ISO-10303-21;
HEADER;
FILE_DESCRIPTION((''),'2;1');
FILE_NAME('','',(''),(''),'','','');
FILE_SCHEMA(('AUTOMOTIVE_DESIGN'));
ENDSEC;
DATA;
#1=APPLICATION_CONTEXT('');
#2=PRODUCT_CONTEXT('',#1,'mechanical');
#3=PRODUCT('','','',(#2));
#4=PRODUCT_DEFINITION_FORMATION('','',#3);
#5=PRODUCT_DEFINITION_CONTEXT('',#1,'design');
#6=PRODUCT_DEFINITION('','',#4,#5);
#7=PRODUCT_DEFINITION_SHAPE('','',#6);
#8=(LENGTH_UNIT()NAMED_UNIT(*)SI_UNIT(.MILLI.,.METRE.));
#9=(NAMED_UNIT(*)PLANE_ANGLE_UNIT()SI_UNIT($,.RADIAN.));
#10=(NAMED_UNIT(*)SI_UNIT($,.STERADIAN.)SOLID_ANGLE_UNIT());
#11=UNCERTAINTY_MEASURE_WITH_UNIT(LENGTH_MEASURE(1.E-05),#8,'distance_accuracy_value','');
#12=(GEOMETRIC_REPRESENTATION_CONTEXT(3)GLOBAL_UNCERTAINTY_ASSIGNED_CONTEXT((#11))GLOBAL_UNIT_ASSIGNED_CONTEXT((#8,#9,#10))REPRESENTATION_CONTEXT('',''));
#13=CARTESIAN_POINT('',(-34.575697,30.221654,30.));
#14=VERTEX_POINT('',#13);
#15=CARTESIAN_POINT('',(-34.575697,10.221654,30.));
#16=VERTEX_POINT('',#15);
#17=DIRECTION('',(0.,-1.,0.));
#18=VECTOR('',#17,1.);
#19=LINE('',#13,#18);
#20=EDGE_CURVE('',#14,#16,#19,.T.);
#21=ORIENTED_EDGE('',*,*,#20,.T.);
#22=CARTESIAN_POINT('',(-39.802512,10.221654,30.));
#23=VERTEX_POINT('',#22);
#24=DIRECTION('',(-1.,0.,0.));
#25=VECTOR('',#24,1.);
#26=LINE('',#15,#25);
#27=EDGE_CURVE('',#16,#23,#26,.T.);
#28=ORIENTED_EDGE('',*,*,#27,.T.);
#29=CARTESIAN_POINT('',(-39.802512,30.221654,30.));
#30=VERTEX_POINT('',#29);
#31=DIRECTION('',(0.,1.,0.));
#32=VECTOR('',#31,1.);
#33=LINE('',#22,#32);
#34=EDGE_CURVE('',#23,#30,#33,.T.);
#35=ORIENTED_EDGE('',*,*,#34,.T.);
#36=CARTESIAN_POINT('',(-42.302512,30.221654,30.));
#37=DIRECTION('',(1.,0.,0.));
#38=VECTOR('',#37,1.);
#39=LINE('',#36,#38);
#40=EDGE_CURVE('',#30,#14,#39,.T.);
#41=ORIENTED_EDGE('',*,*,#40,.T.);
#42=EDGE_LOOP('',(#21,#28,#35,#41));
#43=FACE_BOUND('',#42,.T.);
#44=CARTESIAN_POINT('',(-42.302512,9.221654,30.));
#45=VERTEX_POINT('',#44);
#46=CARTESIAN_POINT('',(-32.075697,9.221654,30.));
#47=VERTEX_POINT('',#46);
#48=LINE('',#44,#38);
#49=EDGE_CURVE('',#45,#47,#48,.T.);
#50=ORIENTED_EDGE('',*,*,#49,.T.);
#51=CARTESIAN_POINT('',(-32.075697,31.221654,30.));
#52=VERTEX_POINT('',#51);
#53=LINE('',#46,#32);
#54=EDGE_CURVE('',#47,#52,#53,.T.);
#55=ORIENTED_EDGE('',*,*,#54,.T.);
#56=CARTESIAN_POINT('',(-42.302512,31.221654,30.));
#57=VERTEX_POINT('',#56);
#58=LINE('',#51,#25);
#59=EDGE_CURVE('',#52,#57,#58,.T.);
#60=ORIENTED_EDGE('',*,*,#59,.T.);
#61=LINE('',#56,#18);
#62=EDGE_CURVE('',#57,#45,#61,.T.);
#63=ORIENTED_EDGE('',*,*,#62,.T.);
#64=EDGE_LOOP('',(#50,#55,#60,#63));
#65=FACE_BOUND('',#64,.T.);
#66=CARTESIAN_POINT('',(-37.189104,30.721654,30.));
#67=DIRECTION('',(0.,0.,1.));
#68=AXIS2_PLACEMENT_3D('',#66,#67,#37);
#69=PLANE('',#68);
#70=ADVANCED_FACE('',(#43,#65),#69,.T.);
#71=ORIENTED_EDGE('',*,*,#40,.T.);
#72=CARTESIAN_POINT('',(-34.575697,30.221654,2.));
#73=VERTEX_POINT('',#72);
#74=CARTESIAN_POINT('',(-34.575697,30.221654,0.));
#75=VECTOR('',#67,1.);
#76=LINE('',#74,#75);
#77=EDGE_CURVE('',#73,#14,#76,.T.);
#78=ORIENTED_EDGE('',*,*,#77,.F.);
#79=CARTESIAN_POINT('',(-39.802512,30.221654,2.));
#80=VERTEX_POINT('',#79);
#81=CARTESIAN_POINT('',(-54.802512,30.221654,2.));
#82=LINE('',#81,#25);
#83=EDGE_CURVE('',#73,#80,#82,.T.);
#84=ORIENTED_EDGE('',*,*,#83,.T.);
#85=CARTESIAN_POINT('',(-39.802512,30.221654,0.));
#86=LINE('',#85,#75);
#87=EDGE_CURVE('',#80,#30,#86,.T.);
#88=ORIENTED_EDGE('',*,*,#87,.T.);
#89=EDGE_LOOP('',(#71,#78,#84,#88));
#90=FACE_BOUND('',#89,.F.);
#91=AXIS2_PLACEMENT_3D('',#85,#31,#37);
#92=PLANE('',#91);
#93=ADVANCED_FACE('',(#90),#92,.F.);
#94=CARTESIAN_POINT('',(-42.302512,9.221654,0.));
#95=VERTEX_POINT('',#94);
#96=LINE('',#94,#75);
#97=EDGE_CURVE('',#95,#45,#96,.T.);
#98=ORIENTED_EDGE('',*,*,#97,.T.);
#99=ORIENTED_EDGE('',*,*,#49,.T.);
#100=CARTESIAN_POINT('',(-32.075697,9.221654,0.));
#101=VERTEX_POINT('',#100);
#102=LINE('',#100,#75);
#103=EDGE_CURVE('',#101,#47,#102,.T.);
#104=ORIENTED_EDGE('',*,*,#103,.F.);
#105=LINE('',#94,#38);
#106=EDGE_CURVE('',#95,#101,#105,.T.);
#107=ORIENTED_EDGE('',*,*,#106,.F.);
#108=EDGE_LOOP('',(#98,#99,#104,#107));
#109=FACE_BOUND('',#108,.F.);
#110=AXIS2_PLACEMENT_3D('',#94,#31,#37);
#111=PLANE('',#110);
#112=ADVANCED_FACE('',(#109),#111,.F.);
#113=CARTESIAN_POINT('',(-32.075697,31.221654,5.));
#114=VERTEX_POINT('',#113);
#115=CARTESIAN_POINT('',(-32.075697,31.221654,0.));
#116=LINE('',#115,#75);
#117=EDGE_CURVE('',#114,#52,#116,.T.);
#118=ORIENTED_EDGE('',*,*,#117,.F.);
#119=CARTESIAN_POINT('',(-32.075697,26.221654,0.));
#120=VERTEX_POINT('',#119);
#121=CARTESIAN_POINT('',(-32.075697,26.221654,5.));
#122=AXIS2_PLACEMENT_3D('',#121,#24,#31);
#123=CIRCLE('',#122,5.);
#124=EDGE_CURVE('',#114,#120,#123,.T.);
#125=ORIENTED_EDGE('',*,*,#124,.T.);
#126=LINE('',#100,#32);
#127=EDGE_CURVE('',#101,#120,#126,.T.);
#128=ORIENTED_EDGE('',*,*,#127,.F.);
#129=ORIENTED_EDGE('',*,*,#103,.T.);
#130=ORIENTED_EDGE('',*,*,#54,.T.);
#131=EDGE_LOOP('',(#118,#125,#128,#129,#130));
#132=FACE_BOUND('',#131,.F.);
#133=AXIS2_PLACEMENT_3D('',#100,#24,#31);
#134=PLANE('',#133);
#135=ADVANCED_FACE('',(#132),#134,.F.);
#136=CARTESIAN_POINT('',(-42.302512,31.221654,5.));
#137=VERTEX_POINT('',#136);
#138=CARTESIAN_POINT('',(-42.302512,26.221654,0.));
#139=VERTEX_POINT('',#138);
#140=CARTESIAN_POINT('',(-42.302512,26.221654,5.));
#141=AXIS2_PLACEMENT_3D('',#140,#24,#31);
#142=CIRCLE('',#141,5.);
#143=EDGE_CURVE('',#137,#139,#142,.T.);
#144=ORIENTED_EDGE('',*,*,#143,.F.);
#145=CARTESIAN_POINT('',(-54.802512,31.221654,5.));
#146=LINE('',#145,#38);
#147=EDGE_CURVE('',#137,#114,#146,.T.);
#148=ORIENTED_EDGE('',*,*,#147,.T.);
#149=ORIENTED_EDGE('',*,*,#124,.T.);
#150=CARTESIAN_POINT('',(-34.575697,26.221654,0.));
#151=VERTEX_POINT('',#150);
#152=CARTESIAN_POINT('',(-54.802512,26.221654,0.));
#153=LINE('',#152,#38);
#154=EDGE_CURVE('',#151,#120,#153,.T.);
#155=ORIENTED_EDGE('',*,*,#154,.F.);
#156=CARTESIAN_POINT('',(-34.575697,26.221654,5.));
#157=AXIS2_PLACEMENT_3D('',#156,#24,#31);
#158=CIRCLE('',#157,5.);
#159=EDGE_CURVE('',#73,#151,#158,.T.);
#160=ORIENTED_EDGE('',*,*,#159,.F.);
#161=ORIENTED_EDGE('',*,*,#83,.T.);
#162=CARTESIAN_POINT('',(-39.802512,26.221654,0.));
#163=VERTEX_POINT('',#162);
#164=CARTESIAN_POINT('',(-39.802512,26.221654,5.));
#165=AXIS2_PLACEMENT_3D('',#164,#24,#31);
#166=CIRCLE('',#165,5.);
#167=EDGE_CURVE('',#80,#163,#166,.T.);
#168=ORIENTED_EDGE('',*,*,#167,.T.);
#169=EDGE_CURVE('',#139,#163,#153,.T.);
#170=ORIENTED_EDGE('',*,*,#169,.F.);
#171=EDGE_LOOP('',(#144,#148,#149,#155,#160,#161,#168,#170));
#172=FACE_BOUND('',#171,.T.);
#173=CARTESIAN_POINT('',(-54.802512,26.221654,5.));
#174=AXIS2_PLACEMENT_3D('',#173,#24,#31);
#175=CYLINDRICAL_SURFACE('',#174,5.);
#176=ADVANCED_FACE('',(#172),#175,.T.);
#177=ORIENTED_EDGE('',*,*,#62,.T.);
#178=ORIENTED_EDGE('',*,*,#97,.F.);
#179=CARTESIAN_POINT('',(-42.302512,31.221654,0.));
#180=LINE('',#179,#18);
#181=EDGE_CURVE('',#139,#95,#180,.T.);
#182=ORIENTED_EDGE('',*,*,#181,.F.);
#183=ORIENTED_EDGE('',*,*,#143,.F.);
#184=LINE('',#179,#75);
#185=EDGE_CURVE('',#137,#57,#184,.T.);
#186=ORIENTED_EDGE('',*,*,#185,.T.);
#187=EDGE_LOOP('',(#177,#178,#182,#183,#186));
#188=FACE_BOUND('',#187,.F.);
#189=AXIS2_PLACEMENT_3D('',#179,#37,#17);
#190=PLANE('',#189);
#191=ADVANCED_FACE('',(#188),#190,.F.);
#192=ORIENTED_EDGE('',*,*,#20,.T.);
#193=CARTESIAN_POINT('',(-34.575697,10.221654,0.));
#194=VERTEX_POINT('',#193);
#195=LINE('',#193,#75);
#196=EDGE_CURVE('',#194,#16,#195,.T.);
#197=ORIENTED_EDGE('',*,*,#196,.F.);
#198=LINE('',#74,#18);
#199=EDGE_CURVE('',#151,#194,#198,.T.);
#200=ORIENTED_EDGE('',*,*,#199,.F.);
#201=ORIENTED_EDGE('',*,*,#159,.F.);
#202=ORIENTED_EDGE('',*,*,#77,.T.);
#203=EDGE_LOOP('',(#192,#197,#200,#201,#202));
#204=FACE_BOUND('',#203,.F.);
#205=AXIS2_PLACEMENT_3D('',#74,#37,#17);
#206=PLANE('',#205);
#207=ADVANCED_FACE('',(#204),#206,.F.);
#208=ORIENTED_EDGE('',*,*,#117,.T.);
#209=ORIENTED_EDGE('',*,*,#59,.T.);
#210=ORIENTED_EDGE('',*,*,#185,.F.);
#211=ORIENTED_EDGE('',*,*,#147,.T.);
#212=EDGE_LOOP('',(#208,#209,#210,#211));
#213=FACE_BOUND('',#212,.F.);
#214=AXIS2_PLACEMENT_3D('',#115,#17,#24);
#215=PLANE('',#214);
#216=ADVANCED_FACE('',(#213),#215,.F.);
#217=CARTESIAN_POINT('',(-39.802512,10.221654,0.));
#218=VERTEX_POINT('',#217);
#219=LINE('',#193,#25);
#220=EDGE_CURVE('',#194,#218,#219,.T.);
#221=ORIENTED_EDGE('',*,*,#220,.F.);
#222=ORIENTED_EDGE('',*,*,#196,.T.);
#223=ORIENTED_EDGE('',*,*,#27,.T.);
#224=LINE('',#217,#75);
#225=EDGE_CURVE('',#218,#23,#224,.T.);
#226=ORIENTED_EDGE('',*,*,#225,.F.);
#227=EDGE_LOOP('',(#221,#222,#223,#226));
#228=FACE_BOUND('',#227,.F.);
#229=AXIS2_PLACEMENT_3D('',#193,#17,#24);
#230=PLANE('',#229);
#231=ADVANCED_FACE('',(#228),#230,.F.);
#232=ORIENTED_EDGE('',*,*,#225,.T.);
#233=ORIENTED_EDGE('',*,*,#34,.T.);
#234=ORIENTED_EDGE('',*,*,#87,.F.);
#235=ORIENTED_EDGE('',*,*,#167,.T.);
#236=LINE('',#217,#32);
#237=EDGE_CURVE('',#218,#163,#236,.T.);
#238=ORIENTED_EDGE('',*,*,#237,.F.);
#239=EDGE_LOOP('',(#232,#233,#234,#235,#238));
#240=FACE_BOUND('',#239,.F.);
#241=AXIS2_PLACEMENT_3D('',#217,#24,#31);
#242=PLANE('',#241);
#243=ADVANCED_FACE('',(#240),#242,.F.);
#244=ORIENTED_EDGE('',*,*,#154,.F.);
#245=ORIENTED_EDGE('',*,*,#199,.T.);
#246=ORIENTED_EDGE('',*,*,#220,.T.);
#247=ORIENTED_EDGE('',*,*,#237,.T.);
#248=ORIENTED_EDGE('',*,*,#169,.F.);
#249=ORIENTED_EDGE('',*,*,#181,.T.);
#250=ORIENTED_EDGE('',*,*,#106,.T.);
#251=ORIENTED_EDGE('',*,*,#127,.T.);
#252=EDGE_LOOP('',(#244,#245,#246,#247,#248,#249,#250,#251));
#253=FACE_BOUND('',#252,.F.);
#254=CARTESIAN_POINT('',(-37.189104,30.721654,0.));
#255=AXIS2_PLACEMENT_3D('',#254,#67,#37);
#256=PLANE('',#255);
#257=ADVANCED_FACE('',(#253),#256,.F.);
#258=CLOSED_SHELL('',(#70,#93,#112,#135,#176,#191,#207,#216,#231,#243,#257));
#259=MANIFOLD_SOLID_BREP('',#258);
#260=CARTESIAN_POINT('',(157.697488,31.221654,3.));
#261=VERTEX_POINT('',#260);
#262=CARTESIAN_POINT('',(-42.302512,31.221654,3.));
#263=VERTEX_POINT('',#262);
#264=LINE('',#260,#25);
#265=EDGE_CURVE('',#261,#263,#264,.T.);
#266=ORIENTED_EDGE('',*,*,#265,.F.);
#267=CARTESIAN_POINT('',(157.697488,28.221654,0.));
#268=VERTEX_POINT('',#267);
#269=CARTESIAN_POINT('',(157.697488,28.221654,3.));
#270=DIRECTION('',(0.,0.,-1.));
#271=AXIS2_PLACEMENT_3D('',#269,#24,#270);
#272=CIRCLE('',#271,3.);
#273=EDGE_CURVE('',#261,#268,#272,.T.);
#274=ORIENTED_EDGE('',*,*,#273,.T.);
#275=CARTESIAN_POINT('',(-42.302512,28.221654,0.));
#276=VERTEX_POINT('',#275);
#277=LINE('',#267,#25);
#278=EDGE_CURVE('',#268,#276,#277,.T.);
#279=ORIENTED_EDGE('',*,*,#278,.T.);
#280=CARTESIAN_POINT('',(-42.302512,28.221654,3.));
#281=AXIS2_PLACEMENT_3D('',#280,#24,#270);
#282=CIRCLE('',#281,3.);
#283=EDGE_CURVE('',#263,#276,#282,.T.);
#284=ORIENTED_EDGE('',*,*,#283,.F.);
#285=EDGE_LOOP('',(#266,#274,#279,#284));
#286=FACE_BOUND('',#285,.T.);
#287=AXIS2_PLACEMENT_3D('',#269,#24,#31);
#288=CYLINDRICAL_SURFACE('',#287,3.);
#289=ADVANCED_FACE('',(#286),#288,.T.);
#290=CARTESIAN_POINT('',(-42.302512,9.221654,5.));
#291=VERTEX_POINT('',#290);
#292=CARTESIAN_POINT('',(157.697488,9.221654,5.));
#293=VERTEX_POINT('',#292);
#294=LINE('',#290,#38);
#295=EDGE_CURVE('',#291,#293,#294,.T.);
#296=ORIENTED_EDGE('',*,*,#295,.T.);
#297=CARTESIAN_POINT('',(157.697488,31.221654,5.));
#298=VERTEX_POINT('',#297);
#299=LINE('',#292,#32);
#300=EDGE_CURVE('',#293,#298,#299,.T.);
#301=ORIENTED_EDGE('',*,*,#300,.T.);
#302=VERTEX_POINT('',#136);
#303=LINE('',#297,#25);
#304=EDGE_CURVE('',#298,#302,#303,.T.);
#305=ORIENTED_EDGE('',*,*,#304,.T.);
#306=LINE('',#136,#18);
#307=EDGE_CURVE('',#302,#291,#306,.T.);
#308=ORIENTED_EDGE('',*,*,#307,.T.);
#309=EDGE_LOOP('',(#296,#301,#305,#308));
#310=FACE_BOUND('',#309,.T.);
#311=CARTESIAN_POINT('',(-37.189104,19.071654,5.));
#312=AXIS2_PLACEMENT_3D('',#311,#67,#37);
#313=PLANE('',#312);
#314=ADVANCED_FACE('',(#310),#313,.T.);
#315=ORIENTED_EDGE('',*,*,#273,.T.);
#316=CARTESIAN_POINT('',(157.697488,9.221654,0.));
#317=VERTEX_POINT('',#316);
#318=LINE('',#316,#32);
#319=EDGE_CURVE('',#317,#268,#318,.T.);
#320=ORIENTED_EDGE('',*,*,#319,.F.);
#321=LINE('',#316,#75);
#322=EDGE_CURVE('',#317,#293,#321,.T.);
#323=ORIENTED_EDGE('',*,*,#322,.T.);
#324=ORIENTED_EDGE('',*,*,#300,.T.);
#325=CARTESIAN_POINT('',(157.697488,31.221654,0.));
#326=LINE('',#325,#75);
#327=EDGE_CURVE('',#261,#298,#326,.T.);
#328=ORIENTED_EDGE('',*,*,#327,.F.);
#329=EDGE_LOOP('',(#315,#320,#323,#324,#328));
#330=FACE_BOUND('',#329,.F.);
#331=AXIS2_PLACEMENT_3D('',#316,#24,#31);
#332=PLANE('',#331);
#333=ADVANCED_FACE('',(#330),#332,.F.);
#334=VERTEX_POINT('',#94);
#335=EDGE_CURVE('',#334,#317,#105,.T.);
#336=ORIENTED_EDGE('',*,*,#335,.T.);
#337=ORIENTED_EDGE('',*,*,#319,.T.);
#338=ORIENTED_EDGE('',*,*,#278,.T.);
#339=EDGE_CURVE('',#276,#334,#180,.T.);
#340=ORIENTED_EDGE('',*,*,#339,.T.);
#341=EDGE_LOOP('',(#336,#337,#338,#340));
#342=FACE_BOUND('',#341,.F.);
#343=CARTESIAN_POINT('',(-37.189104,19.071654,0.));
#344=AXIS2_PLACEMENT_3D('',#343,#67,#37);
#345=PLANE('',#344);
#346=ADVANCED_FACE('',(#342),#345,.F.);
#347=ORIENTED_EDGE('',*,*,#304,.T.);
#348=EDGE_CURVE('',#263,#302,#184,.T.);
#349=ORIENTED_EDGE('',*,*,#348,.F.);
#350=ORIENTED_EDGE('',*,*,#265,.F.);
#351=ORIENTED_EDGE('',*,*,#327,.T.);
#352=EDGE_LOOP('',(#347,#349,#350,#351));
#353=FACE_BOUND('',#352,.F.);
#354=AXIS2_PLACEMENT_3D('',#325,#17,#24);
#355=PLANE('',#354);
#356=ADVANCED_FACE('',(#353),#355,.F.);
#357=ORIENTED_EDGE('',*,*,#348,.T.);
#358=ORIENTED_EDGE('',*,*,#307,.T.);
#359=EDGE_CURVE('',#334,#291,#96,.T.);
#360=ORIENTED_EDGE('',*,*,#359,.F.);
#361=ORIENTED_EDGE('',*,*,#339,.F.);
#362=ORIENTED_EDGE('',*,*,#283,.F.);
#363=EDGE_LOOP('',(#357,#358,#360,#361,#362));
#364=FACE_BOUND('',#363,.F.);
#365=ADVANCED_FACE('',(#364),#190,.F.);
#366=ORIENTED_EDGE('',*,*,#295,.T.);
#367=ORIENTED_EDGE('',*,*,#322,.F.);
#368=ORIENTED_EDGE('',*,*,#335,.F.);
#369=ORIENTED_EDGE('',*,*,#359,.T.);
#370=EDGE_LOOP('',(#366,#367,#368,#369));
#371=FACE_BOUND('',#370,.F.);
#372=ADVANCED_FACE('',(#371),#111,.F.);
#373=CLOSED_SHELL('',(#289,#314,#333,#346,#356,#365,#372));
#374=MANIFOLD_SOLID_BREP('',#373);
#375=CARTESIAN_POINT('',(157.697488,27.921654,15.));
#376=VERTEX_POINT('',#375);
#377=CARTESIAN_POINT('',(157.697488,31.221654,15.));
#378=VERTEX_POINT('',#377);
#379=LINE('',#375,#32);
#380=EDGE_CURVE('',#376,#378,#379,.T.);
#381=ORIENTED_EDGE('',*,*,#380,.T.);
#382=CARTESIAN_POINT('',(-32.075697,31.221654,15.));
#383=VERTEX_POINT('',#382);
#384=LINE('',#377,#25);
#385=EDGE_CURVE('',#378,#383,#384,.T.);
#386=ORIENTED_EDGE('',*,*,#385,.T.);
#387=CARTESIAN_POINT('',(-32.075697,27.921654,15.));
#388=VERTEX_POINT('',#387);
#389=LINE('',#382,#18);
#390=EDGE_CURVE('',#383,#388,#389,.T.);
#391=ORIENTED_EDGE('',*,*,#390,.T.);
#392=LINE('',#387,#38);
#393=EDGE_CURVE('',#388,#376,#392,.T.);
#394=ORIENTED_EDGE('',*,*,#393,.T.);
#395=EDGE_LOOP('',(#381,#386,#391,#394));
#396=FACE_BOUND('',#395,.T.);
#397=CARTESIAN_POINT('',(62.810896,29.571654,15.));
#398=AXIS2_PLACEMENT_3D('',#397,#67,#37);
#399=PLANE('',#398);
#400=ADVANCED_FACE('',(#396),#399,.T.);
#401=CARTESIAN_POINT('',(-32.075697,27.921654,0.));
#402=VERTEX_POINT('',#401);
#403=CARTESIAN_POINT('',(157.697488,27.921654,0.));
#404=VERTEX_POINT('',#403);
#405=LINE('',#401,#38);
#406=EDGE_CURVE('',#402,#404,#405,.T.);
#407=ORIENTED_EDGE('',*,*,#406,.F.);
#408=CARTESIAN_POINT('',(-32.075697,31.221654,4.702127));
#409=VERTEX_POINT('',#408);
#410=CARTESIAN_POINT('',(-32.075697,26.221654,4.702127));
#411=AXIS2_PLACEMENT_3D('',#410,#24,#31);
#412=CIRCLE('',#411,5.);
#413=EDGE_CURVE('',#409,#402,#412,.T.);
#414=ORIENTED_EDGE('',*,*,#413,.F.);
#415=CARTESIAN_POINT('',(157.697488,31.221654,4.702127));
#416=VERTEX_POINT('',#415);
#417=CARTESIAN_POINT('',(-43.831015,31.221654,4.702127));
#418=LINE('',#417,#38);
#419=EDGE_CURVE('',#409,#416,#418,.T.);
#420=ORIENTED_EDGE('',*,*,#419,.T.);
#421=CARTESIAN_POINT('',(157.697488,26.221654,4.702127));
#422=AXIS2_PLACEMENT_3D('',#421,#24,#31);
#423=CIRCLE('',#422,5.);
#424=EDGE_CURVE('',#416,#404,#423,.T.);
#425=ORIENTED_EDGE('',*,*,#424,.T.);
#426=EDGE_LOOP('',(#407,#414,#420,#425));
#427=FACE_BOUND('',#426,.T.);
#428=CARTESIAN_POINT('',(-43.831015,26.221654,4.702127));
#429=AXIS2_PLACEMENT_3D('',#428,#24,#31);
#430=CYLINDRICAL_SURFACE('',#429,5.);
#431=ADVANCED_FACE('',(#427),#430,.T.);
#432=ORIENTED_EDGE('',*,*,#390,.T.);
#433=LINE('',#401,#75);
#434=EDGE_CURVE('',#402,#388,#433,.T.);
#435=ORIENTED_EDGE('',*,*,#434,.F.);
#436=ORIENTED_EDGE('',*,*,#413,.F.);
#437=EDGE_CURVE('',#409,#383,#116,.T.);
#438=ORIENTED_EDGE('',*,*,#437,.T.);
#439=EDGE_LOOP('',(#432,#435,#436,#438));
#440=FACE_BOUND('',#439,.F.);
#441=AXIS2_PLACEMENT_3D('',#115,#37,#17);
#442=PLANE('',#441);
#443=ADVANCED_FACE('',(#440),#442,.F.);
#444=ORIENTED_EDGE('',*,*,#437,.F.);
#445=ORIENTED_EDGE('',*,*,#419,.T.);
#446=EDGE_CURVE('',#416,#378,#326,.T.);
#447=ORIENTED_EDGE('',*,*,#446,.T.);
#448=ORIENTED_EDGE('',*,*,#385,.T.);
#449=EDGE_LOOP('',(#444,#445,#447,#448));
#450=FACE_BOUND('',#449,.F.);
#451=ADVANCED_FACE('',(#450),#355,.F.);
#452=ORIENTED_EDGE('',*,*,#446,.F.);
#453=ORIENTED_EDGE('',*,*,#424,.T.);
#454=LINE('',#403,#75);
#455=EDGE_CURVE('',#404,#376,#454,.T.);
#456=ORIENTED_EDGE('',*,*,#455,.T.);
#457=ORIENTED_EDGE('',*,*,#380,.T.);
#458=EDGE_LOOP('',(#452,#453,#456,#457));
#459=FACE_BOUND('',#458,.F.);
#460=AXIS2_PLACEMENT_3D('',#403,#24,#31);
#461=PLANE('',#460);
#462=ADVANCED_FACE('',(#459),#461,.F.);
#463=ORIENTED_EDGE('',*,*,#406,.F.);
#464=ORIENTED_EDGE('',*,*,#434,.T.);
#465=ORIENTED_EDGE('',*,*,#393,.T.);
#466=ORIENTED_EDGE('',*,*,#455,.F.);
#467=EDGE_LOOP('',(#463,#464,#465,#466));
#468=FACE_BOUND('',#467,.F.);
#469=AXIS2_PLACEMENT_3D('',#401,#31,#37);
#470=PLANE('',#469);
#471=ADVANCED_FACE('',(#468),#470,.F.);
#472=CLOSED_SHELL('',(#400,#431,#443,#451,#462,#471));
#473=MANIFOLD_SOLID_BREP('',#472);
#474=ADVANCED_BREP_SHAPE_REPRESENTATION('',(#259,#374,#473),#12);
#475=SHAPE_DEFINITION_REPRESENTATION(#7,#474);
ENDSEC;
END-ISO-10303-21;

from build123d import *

# Parameters (mm, degrees)
F0_W          = 5.2268145978
F0_H          = 17.7
F0_H_2        = 2.3
F0_W_2        = 2.5
F1_DEPTH      = 5
F2_DEPTH      = 30
F3_DEPTH      = 15
F4_T1_DEPTH   = 35.2268145978
F4_2_T1_DEPTH = 213.2838212932
F5_R          = 3


# Not quite as in the source:
# - a fillet or chamfer that OpenCascade refuses, or shapes differently, is made with other operations: its cross-section is extruded or revolved along the edge and cut away or added


with BuildPart() as f1:
    # F0 (on Top) → F1 (new body)
    with BuildSketch(Plane.XY):
        with Locations((-37.1891043335, 19.0716543853)):
            Rectangle(F0_W, F0_H)
        Polygon((157.6974883676, 9.2216543853), (157.6974883676, 27.9216543853), (-32.0756970346, 27.9216543853), (-32.0756970346, 10.2216543853), (-32.0756970346, 9.2216543853), align=None)
        with Locations((-37.1891043335, 29.0716543853)):
            Rectangle(F0_W, F0_H_2)
        Polygon((-39.8025116324, 10.2216543853), (-42.3025116324, 10.2216543853), (-42.3025116324, 9.2216543853), (-32.0756970346, 9.2216543853), (-32.0756970346, 10.2216543853), (-34.5756970346, 10.2216543853), align=None)
        with Locations((-33.3256970346, 19.0716543853)):
            Rectangle(F0_W_2, F0_H)
        with Locations((-41.0525116324, 19.0716543853)):
            Rectangle(F0_W_2, F0_H)
        with Locations((-41.0525116324, 29.0716543853)):
            Rectangle(F0_W_2, F0_H_2)
        Polygon((-32.0756970346, 31.2216543853), (-42.3025116324, 31.2216543853), (-42.3025116324, 30.2216543853), (-39.8025116324, 30.2216543853), (-34.5756970346, 30.2216543853), (-32.0756970346, 30.2216543853), align=None)
        with Locations((-33.3256970346, 29.0716543853)):
            Rectangle(F0_W_2, F0_H_2)
        Polygon((157.6974883676, 31.2216543853), (-32.0756970346, 31.2216543853), (-32.0756970346, 30.2216543853), (-32.0756970346, 27.9216543853), (157.6974883676, 27.9216543853), align=None)
    extrude(amount=F1_DEPTH)

    # F5
    f5_edges = [f1.edges().sort_by_distance(p)[0] for p in [
        (57.697488, 31.221654, 0),
    ]]
    fillet(f5_edges, radius=F5_R)


with BuildPart() as f2:
    # F0 (on Top) → F2 (new body)
    with BuildSketch(Plane.XY):
        Polygon((-32.0756970346, 31.2216543853), (-42.3025116324, 31.2216543853), (-42.3025116324, 30.2216543853), (-39.8025116324, 30.2216543853), (-34.5756970346, 30.2216543853), (-32.0756970346, 30.2216543853), align=None)
        with Locations((-33.3256970346, 29.0716543853)):
            Rectangle(F0_W_2, F0_H_2)
        with Locations((-33.3256970346, 19.0716543853)):
            Rectangle(F0_W_2, F0_H)
        with Locations((-41.0525116324, 29.0716543853)):
            Rectangle(F0_W_2, F0_H_2)
        with Locations((-41.0525116324, 19.0716543853)):
            Rectangle(F0_W_2, F0_H)
        Polygon((-39.8025116324, 10.2216543853), (-42.3025116324, 10.2216543853), (-42.3025116324, 9.2216543853), (-32.0756970346, 9.2216543853), (-32.0756970346, 10.2216543853), (-34.5756970346, 10.2216543853), align=None)
    extrude(amount=F2_DEPTH)

    # F4: fillet of radius 5 on 1 edges, made by hand

    # F4_s2 → F4_t1 (cut)
    with BuildSketch(Plane.YZ.offset(-54.8025116324)):
        with BuildLine():
            ThreePointArc((31.2216543853, 5), (29.7571882913, 1.4644660941), (26.2216543853, 0))
            Line((26.2216543853, 0), (31.2216543853, 0))
            Line((31.2216543853, 0), (31.2216543853, 5))
        make_face()
    extrude(amount=F4_T1_DEPTH, mode=Mode.SUBTRACT)


with BuildPart() as f3:
    # F0 (on Top) → F3 (new body)
    with BuildSketch(Plane.XY):
        Polygon((157.6974883676, 31.2216543853), (-32.0756970346, 31.2216543853), (-32.0756970346, 30.2216543853), (-32.0756970346, 27.9216543853), (157.6974883676, 27.9216543853), align=None)
    extrude(amount=F3_DEPTH)

    # F4#2: fillet of radius 5 on 1 edges, made by hand

    # F4_2_s2 → F4_2_t1 (cut)
    with BuildSketch(Plane.YZ.offset(-43.8310149801)):
        with BuildLine():
            ThreePointArc((31.2216543853, 4.7021271782), (30.3143307713, 1.8298458549), (27.9216543853, 0))
            Line((27.9216543853, 0), (31.2216543853, 0))
            Line((31.2216543853, 0), (31.2216543853, 4.7021271782))
        make_face()
    extrude(amount=F4_2_T1_DEPTH, mode=Mode.SUBTRACT)


solid = Compound([f1.part, f2.part, f3.part])
